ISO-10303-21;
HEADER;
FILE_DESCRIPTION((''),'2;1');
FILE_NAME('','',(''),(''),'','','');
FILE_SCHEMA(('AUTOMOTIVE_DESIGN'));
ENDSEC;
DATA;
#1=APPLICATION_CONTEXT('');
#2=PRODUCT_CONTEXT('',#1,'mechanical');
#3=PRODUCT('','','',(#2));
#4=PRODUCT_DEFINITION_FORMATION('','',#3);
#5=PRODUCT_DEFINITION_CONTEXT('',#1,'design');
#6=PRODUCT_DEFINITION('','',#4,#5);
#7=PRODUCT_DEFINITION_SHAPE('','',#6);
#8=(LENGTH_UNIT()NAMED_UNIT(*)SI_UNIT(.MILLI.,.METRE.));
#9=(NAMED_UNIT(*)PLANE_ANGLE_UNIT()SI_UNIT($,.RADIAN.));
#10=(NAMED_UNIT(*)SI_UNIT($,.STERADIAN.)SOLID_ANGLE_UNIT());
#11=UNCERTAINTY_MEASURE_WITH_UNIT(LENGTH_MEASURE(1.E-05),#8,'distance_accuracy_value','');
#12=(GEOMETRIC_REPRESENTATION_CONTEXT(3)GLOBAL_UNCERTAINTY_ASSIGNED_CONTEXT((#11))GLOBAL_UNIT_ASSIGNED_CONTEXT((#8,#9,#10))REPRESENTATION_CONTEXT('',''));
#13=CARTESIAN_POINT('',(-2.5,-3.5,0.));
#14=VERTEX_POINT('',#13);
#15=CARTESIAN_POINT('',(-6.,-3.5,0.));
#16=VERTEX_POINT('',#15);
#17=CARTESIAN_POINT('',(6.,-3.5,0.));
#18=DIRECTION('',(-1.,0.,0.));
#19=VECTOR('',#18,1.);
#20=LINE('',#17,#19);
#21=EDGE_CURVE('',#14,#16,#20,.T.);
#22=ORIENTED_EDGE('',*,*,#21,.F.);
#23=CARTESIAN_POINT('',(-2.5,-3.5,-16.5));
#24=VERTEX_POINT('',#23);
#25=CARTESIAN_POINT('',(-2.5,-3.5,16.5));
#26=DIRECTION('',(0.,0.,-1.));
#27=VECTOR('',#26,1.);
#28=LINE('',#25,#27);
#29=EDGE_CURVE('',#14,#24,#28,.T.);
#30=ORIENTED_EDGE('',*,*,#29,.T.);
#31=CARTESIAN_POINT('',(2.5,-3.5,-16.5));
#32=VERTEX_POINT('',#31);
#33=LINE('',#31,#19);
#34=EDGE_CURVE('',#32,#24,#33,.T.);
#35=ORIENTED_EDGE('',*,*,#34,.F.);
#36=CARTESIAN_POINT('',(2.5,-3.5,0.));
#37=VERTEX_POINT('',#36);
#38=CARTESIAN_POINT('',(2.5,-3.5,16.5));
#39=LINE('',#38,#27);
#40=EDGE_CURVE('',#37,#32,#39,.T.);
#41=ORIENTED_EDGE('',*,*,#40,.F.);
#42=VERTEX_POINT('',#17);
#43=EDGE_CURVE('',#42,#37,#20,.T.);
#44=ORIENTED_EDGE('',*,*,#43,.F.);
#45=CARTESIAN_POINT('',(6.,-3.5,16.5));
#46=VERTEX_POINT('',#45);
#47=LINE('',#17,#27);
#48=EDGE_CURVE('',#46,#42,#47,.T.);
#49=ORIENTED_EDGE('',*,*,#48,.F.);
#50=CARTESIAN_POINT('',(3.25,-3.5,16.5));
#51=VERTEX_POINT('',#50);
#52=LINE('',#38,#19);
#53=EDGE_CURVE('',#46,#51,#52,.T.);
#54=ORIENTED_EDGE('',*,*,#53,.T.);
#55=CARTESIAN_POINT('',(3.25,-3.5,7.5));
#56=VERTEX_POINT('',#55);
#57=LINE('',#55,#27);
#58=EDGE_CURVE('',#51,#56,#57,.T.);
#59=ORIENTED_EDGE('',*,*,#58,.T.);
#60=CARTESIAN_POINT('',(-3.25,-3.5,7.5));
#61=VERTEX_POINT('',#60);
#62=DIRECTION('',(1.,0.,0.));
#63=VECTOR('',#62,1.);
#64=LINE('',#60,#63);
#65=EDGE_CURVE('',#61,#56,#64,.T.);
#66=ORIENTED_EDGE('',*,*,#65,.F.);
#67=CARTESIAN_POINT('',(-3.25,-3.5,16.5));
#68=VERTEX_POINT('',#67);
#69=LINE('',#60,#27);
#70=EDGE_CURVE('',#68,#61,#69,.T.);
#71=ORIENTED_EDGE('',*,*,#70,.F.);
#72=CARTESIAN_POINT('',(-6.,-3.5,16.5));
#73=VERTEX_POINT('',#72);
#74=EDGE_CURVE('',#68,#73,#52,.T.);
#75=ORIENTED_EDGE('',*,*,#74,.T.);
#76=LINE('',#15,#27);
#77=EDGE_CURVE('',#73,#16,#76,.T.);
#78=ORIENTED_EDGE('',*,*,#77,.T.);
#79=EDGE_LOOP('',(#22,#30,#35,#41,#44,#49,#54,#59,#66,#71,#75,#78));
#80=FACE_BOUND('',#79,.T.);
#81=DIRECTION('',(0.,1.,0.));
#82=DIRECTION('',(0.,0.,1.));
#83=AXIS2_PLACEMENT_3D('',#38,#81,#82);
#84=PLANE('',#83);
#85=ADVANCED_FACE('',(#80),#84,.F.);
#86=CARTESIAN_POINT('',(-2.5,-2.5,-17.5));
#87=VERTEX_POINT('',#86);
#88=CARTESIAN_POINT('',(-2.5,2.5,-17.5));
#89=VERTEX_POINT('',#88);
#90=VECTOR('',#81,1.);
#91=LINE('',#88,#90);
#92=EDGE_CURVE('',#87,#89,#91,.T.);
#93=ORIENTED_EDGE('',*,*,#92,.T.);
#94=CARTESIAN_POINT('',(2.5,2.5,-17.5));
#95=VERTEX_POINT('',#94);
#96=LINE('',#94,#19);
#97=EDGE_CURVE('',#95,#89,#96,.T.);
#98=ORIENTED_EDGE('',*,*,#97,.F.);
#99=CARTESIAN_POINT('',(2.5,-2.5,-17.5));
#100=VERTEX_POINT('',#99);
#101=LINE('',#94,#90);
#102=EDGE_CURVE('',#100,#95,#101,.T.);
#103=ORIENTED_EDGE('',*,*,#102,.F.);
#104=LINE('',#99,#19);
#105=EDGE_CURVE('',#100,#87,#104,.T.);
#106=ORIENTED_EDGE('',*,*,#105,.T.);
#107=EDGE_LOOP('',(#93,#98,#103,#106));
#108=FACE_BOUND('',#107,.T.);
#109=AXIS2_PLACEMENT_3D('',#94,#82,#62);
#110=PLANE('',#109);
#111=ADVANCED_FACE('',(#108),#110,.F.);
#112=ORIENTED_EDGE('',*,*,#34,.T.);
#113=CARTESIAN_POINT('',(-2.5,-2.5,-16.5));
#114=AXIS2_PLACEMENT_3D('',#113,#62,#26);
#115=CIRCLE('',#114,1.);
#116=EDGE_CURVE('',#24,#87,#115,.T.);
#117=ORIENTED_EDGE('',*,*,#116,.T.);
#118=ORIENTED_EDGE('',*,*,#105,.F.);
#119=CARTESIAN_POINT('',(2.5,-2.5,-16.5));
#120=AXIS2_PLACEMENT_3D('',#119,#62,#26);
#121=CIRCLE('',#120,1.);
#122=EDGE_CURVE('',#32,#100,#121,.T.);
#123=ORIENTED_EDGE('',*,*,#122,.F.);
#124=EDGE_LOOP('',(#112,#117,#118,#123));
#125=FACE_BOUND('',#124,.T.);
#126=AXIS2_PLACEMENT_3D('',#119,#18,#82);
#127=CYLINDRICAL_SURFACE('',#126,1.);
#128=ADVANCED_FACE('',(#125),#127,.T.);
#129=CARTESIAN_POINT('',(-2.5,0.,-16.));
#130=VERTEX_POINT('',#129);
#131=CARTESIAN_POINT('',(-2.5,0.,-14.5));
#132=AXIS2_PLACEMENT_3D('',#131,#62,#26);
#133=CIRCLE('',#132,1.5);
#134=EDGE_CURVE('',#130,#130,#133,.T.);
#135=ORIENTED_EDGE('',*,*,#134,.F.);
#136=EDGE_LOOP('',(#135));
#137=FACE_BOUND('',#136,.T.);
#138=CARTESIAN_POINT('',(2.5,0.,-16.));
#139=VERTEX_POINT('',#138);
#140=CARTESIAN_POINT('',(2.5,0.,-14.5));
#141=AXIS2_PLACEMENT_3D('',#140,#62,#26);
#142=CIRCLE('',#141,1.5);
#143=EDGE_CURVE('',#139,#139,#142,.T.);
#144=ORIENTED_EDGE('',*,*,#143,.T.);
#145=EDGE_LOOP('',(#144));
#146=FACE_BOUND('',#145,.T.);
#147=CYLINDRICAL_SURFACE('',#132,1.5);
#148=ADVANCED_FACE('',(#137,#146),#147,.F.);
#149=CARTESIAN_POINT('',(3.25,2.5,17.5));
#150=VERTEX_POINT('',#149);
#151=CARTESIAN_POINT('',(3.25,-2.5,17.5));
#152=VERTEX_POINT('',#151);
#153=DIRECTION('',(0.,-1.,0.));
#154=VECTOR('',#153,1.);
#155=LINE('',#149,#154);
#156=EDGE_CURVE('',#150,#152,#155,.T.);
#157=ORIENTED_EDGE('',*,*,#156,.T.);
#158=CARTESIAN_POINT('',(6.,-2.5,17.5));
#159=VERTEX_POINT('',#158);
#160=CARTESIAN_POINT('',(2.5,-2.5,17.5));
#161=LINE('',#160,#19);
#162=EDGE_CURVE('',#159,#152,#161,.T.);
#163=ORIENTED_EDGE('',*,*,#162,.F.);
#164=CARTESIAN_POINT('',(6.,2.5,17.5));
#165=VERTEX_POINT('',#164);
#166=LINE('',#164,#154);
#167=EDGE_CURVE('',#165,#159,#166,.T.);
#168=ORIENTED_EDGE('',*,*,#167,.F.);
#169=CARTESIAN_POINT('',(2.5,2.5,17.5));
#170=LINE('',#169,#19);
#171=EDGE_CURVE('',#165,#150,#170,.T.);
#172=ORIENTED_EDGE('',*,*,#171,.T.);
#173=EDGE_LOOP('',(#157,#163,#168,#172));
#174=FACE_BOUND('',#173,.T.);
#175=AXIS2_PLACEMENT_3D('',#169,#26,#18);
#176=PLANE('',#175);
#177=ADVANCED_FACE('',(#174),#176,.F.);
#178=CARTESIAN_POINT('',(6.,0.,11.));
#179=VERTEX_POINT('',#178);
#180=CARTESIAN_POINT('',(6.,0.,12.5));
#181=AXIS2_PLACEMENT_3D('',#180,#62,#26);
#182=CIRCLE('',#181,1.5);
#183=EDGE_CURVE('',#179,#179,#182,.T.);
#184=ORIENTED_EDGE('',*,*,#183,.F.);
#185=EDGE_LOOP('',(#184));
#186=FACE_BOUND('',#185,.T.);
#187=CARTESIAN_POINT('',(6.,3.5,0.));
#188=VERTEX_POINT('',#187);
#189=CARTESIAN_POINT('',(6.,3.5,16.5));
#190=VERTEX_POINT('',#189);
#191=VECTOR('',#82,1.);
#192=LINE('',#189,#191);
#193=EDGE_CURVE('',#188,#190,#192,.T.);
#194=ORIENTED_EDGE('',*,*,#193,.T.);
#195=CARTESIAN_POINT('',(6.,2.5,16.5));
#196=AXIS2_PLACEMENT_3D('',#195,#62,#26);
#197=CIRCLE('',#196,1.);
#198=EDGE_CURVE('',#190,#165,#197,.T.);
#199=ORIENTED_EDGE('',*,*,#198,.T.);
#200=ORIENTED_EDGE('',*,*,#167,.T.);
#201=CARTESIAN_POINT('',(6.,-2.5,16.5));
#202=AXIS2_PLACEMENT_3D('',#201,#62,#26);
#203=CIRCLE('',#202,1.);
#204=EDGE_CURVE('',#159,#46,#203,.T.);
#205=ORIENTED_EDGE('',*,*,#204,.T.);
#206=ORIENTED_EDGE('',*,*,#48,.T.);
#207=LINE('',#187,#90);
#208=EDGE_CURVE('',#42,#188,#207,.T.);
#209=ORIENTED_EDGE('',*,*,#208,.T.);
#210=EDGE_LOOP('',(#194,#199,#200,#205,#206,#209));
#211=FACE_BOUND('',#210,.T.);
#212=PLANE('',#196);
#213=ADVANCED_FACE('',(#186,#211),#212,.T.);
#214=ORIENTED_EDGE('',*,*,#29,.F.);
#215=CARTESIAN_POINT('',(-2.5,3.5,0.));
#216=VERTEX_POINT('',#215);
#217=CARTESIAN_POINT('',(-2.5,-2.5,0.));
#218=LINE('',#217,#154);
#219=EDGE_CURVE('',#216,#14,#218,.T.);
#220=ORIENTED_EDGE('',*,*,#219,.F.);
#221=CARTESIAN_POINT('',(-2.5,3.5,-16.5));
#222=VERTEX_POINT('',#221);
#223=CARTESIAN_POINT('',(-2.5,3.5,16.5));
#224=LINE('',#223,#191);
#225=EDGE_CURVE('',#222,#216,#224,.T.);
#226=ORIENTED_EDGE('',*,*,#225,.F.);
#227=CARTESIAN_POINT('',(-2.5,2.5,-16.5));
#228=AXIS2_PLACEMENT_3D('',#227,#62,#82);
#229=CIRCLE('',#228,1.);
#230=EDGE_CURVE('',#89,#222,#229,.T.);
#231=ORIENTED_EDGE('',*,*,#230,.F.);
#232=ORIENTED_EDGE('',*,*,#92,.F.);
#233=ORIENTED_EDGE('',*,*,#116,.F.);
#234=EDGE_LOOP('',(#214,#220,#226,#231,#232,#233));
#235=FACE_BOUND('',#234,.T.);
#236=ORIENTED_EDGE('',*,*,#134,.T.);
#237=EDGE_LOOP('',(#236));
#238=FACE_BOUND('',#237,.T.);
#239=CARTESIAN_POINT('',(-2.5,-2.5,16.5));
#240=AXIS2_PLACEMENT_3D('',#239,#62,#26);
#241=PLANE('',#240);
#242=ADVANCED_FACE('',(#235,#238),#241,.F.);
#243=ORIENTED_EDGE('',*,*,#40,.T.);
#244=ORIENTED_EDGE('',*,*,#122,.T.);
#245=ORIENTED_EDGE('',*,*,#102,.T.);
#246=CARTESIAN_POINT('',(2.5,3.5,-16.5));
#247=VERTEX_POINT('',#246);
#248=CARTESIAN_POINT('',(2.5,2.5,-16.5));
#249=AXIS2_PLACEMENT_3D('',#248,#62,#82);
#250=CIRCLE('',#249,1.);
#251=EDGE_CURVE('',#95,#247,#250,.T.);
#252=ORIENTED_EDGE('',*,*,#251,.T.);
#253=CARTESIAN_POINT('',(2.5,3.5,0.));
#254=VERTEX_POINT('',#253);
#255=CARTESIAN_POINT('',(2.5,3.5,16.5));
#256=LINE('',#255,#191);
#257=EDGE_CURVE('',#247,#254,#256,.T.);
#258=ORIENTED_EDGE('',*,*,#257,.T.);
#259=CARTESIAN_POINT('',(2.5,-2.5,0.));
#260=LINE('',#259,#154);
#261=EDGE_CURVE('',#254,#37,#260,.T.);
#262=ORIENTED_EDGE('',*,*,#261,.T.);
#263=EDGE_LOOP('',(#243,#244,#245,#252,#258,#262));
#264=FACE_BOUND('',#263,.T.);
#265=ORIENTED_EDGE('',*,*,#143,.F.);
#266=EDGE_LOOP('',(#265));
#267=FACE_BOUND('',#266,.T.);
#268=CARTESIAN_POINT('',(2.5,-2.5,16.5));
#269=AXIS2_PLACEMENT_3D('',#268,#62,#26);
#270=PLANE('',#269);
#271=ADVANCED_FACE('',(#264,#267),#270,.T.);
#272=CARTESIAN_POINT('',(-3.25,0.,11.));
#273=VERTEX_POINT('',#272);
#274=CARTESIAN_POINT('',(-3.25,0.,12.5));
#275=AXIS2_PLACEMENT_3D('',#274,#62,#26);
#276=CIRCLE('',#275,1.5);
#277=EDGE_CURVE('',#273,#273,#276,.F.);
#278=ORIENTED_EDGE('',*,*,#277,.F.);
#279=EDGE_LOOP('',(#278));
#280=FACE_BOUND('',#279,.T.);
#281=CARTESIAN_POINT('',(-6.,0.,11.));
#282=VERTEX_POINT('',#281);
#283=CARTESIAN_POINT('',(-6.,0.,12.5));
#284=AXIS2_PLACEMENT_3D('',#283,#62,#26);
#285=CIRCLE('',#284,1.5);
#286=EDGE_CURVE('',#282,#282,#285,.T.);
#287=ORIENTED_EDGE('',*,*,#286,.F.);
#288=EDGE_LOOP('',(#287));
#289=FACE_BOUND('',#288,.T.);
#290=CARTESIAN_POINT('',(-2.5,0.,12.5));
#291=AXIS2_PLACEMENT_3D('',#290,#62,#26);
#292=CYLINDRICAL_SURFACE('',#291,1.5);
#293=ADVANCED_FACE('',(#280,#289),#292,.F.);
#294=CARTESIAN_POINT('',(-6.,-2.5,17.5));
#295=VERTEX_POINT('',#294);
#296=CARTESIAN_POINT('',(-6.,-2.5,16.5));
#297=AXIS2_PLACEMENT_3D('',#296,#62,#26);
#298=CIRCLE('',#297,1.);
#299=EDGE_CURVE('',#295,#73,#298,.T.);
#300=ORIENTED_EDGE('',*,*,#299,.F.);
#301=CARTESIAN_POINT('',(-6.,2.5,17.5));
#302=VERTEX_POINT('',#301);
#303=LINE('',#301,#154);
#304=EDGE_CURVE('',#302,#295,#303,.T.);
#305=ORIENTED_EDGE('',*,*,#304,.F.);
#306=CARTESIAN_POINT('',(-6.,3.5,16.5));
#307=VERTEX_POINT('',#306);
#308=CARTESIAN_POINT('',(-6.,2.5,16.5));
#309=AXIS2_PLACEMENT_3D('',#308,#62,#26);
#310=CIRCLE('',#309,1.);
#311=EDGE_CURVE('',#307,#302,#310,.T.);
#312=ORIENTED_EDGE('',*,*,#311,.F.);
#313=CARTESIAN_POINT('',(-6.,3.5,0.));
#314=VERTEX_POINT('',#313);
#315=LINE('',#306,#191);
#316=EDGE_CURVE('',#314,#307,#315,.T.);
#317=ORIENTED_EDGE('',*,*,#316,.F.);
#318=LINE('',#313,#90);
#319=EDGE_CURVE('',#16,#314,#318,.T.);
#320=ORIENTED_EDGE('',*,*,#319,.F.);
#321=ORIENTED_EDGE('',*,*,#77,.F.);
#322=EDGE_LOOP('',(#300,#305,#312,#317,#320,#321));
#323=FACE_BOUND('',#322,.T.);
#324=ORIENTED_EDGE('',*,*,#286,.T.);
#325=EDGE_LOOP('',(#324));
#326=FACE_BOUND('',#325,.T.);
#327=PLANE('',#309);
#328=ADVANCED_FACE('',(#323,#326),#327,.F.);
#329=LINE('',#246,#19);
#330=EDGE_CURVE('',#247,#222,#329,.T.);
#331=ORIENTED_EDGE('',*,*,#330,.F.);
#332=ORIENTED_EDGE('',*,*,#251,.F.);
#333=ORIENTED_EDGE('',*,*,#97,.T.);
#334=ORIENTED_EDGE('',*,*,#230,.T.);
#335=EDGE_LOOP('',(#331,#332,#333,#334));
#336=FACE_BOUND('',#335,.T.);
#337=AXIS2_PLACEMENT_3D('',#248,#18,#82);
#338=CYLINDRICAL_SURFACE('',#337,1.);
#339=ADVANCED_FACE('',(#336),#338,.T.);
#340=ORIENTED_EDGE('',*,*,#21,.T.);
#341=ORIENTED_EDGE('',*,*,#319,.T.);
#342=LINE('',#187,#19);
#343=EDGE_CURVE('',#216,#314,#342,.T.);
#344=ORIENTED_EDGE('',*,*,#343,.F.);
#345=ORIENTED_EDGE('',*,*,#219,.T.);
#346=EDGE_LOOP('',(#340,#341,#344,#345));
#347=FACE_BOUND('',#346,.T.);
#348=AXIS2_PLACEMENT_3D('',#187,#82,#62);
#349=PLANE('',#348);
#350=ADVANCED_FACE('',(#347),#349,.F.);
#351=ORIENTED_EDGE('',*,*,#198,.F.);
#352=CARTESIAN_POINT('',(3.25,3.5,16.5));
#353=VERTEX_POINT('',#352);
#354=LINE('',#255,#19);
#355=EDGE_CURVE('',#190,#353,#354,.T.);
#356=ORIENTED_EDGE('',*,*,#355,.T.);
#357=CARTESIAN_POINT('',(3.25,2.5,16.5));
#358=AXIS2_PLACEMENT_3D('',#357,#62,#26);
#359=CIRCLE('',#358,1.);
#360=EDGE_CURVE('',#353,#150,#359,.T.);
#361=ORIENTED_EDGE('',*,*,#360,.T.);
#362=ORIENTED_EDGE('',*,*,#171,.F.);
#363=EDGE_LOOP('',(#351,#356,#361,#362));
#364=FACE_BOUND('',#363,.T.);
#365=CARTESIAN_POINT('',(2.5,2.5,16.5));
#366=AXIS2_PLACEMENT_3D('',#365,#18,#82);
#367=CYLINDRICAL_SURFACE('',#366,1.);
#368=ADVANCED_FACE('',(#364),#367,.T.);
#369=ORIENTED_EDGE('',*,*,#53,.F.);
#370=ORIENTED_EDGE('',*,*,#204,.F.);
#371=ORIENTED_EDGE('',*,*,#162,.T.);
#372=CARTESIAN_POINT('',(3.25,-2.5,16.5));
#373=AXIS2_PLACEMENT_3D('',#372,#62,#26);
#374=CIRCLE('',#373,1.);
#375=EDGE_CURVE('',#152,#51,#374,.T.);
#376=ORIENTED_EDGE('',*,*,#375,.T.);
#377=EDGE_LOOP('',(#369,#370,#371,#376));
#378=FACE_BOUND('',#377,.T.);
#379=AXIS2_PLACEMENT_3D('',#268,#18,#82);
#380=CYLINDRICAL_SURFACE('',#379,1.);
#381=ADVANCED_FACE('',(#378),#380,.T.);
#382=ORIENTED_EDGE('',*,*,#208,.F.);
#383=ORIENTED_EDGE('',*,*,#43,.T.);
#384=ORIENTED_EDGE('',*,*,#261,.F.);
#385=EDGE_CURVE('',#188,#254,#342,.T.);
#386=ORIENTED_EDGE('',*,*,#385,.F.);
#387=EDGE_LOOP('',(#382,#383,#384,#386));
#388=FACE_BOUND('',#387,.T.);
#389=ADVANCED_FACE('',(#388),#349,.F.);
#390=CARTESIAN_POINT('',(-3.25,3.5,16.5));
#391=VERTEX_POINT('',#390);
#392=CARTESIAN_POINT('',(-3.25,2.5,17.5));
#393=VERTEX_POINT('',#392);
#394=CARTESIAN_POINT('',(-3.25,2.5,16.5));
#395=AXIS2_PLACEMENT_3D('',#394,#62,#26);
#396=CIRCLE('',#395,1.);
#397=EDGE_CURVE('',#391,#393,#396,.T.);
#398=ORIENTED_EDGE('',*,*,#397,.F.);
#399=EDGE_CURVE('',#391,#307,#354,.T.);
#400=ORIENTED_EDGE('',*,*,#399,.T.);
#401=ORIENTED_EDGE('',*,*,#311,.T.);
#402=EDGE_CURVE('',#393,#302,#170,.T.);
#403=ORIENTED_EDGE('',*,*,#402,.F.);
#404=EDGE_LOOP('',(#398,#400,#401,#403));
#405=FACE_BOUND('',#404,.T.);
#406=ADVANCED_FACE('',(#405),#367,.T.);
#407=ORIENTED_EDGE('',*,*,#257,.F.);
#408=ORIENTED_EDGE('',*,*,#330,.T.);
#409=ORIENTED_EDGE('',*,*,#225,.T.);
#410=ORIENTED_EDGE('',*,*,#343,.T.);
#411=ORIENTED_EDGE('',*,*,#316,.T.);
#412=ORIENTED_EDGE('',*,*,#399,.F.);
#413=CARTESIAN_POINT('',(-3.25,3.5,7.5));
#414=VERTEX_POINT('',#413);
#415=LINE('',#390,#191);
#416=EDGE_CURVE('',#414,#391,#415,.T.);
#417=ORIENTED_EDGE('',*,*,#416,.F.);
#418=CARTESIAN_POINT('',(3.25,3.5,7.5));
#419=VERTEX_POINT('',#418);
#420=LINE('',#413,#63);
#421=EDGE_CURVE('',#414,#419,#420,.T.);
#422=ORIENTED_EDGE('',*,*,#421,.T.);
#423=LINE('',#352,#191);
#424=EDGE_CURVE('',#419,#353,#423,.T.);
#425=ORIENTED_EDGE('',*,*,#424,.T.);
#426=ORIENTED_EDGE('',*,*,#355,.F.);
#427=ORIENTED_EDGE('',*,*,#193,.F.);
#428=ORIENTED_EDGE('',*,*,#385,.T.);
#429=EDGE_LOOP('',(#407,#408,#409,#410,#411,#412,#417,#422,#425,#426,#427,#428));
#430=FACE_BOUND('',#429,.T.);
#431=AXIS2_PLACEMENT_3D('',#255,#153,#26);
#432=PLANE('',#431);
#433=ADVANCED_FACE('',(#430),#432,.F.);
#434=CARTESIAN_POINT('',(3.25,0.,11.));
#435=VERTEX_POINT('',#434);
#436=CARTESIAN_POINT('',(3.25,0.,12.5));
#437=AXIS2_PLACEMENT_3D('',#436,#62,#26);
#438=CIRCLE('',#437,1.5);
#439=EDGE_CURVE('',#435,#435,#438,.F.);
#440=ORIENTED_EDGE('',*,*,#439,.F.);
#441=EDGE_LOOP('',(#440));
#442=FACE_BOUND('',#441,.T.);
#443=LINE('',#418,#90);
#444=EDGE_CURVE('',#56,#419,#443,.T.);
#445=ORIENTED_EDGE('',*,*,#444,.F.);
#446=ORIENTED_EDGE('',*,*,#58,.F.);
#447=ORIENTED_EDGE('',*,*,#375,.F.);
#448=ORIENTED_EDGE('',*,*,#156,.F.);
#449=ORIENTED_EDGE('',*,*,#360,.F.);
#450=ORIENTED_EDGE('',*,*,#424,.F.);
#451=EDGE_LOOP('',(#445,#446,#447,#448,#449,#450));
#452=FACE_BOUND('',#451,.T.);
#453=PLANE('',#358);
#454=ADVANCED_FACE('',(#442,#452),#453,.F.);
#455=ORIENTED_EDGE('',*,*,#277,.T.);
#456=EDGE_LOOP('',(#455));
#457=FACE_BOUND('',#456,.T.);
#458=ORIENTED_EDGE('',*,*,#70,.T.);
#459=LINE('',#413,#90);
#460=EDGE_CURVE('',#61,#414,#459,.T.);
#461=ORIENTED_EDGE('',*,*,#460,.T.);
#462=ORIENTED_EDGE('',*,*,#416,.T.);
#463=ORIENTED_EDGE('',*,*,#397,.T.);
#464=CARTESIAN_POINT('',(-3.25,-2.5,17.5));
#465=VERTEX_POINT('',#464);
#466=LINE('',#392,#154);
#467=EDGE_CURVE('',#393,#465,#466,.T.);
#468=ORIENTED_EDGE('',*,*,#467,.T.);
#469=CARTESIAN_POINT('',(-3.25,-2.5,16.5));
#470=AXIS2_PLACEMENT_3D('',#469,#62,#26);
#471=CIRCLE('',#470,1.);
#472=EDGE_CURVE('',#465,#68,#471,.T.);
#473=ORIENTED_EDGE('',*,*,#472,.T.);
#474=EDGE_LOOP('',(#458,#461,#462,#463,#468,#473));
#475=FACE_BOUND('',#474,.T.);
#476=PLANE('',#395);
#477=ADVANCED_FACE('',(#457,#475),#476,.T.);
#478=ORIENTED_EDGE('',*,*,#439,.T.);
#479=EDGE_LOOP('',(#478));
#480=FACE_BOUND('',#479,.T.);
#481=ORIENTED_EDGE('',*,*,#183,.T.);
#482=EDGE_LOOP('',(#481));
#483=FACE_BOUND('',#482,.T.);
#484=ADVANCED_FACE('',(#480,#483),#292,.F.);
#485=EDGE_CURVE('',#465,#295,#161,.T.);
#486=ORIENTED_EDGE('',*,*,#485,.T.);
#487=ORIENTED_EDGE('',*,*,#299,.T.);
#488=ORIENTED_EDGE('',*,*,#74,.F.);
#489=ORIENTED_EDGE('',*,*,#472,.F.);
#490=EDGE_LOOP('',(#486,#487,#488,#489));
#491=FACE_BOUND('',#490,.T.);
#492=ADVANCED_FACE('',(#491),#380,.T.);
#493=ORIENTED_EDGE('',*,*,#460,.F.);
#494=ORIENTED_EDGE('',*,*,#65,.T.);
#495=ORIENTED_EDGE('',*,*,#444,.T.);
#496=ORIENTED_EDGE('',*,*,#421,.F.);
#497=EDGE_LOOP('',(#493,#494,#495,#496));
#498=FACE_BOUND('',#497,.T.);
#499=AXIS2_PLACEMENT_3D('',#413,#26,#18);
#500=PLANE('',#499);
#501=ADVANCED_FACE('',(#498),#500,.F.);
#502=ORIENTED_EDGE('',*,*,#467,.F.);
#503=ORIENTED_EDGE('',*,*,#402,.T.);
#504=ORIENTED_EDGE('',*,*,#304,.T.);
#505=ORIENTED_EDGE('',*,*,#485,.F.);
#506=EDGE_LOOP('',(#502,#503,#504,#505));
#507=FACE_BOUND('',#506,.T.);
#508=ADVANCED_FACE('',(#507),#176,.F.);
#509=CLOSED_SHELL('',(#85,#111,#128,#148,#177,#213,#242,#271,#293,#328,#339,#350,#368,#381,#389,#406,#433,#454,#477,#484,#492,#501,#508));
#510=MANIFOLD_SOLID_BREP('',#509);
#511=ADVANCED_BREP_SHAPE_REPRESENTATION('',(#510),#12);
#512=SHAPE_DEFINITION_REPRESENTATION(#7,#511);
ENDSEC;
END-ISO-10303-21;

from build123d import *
from build123d.topology import SkipClean

# Parameters (mm, degrees)
SALIENTE_EXTRUIR1_DEPTH    = 2.5
CORTAR_EXTRUIR1_DEPTH      = 19.020821291
CORTAR_EXTRUIR1_DEPTH_BACK = 19.020821291
CROQUIS2_R                 = 1.5
CROQUIS3_R                 = 1.5
SALIENTE_EXTRUIR2_DEPTH    = 6
CORTAR_EXTRUIR2_DEPTH      = 3.25


with BuildPart() as part:
    # Croquis1 → Saliente-Extruir1 (new, symmetric)
    with BuildSketch(Plane(origin=(0, 0, 0), x_dir=(0, 0, -1), z_dir=(1, 0, 0))):
        with BuildLine():
            Line((-16.5, 3.5), (16.5, 3.5))
            ThreePointArc((16.5, 3.5), (17.207106781, 3.207106781), (17.5, 2.5))
            Line((17.5, 2.5), (17.5, -2.5))
            ThreePointArc((17.5, -2.5), (17.207106781, -3.207106781), (16.5, -3.5))
            Line((16.5, -3.5), (-16.5, -3.5))
            ThreePointArc((-16.5, -3.5), (-17.207106781, -3.207106781), (-17.5, -2.5))
            Line((-17.5, -2.5), (-17.5, 2.5))
            ThreePointArc((-17.5, 2.5), (-17.207106781, 3.207106781), (-16.5, 3.5))
        make_face()
    extrude(amount=SALIENTE_EXTRUIR1_DEPTH, both=True)

    # Croquis2 → Cortar-Extruir1 (cut, two sides: drawn at the far end of the back side and taken through both)
    with BuildSketch(Plane(origin=(0, 0, 0), x_dir=(0, 0, -1), z_dir=(1, 0, 0)).offset(-CORTAR_EXTRUIR1_DEPTH_BACK)):
        with Locations((-12.5, 0)):
            Circle(CROQUIS2_R)
        with Locations((14.5, 0)):
            Circle(CROQUIS2_R)
    extrude(amount=CORTAR_EXTRUIR1_DEPTH + CORTAR_EXTRUIR1_DEPTH_BACK, mode=Mode.SUBTRACT)

    # Croquis3 → Saliente-Extruir2 (add, symmetric)
    with SkipClean():  # the faces are left unmerged after this step: merging them gives an invalid solid
        with BuildSketch(Plane(origin=(0, 0, 0), x_dir=(0, 0, -1), z_dir=(1, 0, 0))):
            with BuildLine():
                Line((-17.5, 2.5), (-17.5, -2.5))
                ThreePointArc((-17.5, -2.5), (-17.207106781, -3.207106781), (-16.5, -3.5))
                Line((-16.5, -3.5), (0, -3.5))
                Line((0, -3.5), (0, 3.5))
                Line((0, 3.5), (-16.5, 3.5))
                ThreePointArc((-16.5, 3.5), (-17.207106781, 3.207106781), (-17.5, 2.5))
            make_face()
            with Locations((-12.5, 0)):
                Circle(CROQUIS3_R, mode=Mode.SUBTRACT)
        extrude(amount=SALIENTE_EXTRUIR2_DEPTH, both=True)
    add(part.part.scale(1), mode=Mode.REPLACE)  # the faces are merged on a copy

    # Croquis4 → Cortar-Extruir2 (cut, symmetric)
    with BuildSketch(Plane(origin=(0, 0, 0), x_dir=(0, 0, -1), z_dir=(1, 0, 0))):
        with BuildLine():
            Line((-16.5, 3.5), (-7.5, 3.5))
            Line((-7.5, 3.5), (-7.5, -3.5))
            Line((-7.5, -3.5), (-16.5, -3.5))
            ThreePointArc((-16.5, -3.5), (-17.207106781, -3.207106781), (-17.5, -2.5))
            Line((-17.5, -2.5), (-17.5, 2.5))
            ThreePointArc((-17.5, 2.5), (-17.207106781, 3.207106781), (-16.5, 3.5))
        make_face()
    extrude(amount=CORTAR_EXTRUIR2_DEPTH, both=True, mode=Mode.SUBTRACT)


solid = part.part
